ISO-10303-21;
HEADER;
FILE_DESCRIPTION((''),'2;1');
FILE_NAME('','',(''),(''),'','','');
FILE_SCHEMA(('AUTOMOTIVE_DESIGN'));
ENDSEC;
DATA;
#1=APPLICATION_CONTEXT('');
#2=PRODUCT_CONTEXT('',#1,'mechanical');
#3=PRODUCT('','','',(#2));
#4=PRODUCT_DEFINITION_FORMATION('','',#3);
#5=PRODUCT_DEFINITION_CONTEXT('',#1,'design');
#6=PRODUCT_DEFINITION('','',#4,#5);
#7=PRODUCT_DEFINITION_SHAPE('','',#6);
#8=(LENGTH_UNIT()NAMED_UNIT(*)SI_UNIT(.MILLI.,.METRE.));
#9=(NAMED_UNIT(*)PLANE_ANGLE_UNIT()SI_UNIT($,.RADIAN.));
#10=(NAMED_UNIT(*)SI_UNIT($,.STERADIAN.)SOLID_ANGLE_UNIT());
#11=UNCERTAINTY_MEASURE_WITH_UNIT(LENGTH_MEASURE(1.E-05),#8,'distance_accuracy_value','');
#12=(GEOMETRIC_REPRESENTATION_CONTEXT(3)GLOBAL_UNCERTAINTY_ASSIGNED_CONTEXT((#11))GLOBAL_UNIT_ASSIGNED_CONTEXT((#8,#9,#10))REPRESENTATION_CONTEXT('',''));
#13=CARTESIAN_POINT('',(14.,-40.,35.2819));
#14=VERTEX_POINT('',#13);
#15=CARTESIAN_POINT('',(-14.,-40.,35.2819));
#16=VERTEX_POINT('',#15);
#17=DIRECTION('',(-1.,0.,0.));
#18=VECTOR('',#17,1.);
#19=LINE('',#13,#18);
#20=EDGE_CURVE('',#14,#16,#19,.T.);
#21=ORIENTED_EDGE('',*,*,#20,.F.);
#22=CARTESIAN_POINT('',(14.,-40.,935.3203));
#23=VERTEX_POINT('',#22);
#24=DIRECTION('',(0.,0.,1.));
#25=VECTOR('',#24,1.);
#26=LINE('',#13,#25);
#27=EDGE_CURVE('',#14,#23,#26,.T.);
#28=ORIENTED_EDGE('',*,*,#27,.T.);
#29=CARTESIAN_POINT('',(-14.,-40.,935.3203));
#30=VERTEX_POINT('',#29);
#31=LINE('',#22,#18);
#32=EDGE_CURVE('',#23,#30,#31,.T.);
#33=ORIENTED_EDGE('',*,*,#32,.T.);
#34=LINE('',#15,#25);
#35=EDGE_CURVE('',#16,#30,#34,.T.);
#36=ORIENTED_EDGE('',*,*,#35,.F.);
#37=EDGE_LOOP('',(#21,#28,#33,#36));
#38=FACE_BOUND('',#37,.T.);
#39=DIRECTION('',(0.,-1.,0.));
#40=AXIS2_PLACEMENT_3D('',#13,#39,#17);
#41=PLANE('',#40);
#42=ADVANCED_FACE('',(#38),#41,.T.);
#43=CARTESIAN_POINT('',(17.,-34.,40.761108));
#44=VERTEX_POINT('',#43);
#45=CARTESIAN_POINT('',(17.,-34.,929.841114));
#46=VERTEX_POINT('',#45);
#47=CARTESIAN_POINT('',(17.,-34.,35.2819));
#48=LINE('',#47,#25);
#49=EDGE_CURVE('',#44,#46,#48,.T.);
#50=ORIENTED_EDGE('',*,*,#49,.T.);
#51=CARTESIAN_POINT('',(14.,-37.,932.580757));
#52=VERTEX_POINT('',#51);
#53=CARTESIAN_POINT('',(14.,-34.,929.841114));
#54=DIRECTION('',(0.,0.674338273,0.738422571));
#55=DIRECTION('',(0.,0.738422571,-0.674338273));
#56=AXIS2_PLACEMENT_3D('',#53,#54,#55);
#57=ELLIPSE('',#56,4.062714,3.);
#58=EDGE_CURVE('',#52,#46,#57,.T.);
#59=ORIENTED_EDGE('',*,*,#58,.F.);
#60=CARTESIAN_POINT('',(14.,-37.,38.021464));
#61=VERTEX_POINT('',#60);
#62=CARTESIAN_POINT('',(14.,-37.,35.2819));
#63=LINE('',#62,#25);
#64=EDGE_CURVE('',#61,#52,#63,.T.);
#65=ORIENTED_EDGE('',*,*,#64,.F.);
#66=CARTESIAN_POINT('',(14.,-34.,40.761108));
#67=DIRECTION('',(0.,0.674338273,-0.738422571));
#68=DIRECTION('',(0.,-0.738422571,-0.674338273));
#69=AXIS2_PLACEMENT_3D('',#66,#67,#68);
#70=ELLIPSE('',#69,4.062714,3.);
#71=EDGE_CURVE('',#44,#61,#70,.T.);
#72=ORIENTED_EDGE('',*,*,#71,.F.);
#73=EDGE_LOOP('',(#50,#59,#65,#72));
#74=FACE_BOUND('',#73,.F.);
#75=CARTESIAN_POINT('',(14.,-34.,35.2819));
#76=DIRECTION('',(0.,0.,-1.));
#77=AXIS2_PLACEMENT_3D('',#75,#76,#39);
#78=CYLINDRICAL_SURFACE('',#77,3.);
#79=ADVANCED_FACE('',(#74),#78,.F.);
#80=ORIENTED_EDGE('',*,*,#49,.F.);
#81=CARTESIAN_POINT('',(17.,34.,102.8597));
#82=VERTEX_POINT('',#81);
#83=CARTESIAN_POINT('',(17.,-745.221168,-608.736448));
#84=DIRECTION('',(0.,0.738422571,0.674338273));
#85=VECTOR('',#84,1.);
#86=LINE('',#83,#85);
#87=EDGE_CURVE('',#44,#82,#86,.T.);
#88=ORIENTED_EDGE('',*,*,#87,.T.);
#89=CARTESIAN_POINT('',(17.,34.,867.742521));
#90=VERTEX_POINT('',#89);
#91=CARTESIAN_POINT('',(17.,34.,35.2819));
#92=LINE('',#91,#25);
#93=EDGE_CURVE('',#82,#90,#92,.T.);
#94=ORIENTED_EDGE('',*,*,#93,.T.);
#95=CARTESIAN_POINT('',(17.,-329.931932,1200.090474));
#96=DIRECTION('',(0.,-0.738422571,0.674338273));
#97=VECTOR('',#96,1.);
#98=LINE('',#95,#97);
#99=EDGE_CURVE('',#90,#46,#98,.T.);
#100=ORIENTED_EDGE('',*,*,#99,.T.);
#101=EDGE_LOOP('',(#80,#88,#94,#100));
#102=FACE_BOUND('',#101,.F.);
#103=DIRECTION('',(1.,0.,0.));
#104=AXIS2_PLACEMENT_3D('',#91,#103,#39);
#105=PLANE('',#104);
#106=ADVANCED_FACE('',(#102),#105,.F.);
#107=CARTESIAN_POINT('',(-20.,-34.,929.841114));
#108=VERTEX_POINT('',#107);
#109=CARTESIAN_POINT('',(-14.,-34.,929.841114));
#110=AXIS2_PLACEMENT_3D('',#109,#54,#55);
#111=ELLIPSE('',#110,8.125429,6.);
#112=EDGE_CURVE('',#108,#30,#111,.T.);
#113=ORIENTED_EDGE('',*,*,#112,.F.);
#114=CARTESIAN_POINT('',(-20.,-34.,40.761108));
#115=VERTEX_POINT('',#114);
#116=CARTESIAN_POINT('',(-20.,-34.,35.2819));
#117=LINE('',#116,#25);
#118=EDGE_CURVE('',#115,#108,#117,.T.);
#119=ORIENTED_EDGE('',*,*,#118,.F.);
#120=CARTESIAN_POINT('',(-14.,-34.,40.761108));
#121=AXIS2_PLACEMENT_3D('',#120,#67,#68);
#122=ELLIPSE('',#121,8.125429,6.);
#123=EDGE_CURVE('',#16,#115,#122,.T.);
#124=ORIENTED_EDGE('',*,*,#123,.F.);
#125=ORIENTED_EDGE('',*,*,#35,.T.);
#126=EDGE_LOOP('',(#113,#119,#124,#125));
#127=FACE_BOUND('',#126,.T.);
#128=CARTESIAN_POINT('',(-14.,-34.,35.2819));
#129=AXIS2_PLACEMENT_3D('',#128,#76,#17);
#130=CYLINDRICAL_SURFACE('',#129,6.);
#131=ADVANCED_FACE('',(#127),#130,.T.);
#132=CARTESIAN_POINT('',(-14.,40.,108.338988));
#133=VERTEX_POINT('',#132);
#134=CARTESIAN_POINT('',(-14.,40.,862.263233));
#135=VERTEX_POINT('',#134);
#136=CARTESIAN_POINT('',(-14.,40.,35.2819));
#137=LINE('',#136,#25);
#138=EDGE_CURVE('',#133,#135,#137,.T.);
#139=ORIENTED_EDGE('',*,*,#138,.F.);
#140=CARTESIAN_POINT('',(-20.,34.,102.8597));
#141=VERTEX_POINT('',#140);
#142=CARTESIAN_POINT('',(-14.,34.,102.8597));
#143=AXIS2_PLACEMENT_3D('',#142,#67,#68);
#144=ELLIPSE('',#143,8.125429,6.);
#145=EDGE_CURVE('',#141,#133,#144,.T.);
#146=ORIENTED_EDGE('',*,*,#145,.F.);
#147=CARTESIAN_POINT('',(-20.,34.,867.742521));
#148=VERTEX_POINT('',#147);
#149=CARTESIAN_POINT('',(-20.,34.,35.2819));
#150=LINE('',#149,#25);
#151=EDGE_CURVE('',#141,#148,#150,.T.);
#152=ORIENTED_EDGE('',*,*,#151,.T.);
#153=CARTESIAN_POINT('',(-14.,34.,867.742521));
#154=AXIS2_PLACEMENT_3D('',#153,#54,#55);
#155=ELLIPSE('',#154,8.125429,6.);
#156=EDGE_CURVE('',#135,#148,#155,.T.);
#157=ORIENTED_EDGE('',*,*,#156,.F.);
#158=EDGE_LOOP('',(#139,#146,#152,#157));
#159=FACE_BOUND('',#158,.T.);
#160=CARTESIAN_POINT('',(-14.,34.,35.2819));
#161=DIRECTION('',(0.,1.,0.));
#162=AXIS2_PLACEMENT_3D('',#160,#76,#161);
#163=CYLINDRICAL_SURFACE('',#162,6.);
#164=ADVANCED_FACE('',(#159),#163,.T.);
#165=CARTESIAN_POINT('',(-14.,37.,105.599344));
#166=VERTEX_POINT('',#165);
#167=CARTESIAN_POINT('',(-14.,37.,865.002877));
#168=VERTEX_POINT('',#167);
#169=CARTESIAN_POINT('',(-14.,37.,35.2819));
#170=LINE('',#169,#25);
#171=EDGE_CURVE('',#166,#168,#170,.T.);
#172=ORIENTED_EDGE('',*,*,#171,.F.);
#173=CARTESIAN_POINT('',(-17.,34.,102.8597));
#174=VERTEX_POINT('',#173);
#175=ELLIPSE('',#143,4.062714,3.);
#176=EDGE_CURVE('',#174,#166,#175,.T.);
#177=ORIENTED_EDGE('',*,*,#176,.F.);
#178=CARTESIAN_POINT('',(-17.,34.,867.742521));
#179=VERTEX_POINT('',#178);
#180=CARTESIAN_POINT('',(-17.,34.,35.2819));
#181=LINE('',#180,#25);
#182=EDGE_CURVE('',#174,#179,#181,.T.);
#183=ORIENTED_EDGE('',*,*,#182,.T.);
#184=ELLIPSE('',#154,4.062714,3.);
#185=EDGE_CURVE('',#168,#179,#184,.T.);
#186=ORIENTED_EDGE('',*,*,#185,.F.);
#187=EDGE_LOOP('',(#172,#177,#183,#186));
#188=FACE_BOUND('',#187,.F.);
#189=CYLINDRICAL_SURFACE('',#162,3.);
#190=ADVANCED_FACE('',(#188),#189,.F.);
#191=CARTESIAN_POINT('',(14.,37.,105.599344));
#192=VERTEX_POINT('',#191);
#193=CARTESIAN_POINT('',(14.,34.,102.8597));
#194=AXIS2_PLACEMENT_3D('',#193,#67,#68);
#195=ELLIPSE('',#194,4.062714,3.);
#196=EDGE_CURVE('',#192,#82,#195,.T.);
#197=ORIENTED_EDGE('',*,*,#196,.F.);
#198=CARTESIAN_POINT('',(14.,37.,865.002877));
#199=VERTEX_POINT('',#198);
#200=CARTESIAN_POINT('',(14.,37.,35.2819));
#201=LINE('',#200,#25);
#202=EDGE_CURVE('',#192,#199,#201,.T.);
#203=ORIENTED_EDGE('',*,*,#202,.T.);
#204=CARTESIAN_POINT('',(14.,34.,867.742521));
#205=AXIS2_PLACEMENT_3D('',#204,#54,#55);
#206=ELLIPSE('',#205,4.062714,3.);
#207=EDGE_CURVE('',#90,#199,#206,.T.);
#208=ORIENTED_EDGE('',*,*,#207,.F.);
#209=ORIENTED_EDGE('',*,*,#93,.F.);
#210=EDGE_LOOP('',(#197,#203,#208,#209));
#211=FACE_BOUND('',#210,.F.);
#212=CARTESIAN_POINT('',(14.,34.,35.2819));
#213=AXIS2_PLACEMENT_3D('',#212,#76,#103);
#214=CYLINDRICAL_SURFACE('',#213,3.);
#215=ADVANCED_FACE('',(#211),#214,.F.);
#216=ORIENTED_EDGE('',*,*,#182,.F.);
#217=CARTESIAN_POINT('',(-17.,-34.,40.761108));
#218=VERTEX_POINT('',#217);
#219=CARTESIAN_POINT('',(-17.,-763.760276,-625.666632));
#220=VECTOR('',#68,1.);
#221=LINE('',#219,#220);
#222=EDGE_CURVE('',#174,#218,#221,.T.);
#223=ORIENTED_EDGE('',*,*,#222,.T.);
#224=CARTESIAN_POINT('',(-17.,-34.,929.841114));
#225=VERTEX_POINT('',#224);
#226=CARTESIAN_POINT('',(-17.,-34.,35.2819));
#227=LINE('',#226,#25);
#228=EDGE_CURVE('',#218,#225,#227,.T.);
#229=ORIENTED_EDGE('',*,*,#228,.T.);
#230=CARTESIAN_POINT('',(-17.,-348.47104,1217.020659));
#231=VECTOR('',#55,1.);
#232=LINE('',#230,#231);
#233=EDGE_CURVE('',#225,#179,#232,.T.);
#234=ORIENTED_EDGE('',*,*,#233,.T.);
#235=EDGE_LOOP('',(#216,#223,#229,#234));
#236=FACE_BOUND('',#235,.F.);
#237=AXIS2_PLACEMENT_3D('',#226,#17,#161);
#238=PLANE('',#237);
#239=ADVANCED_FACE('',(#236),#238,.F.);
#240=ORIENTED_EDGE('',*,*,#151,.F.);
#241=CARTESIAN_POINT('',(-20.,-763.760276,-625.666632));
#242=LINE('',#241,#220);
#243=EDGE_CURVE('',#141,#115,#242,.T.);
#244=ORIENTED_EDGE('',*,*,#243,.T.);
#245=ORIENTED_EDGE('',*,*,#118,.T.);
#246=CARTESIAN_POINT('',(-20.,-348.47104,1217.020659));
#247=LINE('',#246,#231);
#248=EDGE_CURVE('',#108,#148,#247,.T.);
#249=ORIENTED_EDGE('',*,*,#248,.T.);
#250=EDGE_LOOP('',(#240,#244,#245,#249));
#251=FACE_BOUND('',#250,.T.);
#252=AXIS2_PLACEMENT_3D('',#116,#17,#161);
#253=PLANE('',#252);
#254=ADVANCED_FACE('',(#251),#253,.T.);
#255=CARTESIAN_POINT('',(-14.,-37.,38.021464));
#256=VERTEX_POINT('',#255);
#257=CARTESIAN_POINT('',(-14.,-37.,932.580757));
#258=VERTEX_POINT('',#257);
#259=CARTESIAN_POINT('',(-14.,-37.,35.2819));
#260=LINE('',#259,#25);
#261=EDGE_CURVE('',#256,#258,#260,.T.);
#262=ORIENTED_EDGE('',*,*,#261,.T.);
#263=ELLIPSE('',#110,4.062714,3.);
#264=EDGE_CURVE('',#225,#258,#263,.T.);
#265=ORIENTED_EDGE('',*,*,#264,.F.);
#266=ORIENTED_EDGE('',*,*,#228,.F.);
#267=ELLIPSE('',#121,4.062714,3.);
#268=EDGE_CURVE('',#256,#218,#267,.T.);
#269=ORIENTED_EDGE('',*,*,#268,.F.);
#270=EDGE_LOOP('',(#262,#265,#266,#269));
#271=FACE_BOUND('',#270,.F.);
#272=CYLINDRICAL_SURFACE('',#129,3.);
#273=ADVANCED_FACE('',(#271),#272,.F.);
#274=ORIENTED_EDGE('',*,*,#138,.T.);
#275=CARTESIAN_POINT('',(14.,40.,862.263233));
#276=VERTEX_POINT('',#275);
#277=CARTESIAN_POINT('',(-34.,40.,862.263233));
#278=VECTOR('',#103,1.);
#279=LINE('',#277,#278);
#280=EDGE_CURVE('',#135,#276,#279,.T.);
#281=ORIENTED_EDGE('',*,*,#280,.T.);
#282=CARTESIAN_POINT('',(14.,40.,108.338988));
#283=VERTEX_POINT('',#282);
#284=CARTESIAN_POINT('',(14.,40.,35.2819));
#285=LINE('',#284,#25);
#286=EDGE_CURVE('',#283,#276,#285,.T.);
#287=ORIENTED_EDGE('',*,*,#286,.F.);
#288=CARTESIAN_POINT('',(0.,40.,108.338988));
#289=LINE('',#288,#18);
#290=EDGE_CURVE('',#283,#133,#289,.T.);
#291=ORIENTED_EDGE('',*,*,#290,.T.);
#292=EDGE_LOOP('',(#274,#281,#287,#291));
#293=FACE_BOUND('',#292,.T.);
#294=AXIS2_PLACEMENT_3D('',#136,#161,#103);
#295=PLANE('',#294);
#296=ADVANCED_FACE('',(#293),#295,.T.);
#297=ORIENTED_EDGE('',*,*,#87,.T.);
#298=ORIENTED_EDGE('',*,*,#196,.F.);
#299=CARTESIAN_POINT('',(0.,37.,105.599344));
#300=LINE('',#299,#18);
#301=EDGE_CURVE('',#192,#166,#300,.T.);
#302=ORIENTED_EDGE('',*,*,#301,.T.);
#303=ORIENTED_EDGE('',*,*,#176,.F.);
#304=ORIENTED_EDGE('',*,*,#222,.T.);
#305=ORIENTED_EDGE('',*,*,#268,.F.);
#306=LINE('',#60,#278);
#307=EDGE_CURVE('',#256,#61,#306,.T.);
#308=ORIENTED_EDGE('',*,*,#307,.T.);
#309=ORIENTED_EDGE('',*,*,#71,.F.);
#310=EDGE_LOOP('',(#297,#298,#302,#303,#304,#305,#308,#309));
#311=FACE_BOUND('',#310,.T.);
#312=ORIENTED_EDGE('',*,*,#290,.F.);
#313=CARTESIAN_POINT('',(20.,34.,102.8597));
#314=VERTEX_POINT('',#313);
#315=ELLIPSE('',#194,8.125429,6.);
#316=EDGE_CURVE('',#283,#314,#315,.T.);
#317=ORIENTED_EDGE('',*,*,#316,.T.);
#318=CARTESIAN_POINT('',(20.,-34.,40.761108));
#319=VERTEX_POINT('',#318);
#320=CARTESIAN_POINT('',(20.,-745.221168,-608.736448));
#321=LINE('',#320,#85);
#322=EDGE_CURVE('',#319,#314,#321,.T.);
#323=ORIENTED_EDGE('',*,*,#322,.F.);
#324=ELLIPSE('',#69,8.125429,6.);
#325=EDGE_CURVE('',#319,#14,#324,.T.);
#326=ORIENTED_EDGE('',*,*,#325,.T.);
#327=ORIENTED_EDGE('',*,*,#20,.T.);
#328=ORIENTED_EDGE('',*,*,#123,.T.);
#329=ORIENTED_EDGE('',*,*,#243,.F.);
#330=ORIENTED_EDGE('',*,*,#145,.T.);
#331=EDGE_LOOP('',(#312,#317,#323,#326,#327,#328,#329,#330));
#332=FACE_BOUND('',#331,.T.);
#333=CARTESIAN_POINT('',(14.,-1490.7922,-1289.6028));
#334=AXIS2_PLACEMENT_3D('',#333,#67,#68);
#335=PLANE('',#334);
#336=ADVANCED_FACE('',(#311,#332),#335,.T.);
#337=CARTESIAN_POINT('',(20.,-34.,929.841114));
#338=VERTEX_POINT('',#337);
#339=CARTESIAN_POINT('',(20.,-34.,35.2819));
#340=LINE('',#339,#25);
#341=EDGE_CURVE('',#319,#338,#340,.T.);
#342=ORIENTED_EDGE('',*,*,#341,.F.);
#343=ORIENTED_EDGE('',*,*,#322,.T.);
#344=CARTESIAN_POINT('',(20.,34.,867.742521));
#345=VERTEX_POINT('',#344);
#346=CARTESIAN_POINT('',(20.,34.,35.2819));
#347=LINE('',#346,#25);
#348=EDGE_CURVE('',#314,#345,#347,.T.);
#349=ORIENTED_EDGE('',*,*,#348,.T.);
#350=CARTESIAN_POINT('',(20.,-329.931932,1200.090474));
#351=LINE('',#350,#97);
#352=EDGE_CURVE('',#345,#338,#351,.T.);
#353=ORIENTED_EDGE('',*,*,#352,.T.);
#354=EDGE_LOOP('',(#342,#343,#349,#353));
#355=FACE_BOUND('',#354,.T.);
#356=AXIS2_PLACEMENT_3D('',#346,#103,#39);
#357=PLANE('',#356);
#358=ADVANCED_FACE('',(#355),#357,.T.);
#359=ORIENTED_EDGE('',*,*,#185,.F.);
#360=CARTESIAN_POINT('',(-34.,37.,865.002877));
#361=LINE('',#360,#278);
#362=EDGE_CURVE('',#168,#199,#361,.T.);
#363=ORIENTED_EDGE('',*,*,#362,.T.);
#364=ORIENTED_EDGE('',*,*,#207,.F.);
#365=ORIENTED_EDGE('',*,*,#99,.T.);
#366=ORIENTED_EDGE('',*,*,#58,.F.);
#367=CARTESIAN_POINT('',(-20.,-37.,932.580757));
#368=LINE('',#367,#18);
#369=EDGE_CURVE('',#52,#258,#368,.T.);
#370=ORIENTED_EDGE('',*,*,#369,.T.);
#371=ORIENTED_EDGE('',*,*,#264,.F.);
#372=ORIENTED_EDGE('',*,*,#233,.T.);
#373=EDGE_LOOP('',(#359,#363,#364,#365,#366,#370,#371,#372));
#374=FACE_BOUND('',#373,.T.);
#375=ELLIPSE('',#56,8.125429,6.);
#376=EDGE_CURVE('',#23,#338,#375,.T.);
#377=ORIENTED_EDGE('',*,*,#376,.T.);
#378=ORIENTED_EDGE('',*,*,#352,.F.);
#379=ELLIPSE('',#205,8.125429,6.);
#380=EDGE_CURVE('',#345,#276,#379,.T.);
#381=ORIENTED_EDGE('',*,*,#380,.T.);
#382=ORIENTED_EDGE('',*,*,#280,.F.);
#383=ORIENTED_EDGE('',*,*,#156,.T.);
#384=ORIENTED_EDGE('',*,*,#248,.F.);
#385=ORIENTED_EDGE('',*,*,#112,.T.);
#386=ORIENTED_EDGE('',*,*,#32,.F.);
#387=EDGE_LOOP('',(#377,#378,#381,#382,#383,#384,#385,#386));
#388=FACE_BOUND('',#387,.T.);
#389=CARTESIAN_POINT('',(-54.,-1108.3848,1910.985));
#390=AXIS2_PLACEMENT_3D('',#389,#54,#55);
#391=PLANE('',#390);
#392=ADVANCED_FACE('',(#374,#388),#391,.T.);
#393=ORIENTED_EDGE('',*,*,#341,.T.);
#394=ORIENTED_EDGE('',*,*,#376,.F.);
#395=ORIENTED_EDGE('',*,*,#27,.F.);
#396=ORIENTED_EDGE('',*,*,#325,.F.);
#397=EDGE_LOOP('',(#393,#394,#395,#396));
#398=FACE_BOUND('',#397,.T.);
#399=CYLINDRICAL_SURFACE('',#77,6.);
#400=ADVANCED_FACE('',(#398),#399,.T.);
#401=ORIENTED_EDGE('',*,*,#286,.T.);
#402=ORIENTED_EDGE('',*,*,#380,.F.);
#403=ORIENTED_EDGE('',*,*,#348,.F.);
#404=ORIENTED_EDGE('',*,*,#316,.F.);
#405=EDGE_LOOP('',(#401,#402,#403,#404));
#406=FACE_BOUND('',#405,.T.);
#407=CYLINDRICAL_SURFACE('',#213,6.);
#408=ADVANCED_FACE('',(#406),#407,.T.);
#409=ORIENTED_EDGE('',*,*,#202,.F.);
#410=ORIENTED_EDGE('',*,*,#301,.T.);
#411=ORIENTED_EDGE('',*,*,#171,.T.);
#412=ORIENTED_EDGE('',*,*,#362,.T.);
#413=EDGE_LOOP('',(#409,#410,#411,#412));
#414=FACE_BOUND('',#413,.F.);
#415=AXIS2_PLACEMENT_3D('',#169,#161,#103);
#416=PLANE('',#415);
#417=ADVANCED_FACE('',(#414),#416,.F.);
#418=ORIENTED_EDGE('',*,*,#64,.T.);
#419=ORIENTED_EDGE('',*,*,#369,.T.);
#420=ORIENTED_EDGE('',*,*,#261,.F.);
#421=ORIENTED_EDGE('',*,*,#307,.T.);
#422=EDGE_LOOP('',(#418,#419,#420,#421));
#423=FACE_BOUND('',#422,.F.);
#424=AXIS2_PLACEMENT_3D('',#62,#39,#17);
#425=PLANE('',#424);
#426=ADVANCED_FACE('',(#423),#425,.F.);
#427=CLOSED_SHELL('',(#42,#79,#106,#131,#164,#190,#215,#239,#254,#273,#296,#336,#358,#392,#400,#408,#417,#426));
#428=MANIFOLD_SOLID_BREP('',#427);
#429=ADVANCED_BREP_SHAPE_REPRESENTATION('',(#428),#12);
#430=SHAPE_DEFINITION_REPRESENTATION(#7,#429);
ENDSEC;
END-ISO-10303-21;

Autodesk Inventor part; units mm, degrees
ref_plane "Start Plane" through (0, 0, 35.2819) normal (0, 0, 1) x (1, 0, 0)
ref_plane "End Plane" through (0, 0, 935.3203) normal (0, 0, 1) x (1, 0, 0)
sketch "Sketch" plane through (0, 0, 0) normal (0, 0, 1) x (1, 0, 0)
  line L0 (-20, -34) -> (-20, 34)
  line L1 (-14, 40) -> (14, 40)
  line L2 (20, 34) -> (20, -34)
  line L3 (14, -40) -> (-14, -40)
  arc A0 (-20, -34) -> (-14, -40) centre (-14, -34) ccw
  arc A1 (20, 34) -> (14, 40) centre (14, 34) ccw
  arc A2 (-14, 40) -> (-20, 34) centre (-14, 34) ccw
  arc A3 (14, -40) -> (20, -34) centre (14, -34) ccw
  arc A4 (-14, 37) -> (-17, 34) centre (-14, 34) ccw
  line L4 (-14, 37) -> (14, 37)
  arc A5 (17, 34) -> (14, 37) centre (14, 34) ccw
  line L5 (17, 34) -> (17, -34)
  arc A6 (14, -37) -> (17, -34) centre (14, -34) ccw
  line L6 (14, -37) -> (-14, -37)
  arc A7 (-17, -34) -> (-14, -37) centre (-14, -34) ccw
  line L7 (-17, -34) -> (-17, 34)
  line L8 (0, 57.7397) -> (0, -57.7397) construction
  line L9 (-29.7397, 0) -> (29.7397, 0) construction
  dimension "d7" = 6
  dimension "d9" = 40
  dimension "d11" = 80
  dimension "d12" = 3
  dimension "d15" = 20
  dimension "d16" = 40
extrude "Body" add sketch "Sketch" along normal up to surface (900.0384 mm away) from surface at 35.2819
sketch "Sketch3" plane through (0, 0, 0) normal (0, 0, 1) x (1, 0, 0)
  line L0 (0, 0) -> (10, 0)
ref_plane "Work Plane3" through (0, 0, 0) normal (0, -1, 0) x (1, 0, 0)
ref_plane "Work Plane4" through (-54, -1108.3848, 1910.985) normal (0, 0.6743383, 0.7384226) x (1, 0, 0)
split "Split1" plane through (-54, -1108.3848, 1910.985) removes the side toward (0, 0.6743383, 0.7384226)
ref_plane "Work Plane5" through (14, -1490.7922, -1289.6028) normal (0, 0.6743383, -0.7384226) x (1, 0, 0)
split "Split2" plane through (14, -1490.7922, -1289.6028) removes the side toward (0, 0.6743383, -0.7384226)
sketch "Sketch4" plane through (0, 0, 0) normal (0, -1, 0) x (1, 0, 0)
  line L0 (-2, 35.2819) -> (12, 35.2819) projected
  line L1 (-2, 935.3203) -> (12, 935.3203) projected
  dimension "d18" = 900.0385
equation "\"d7\" = G_IR"
equation "\"d9\" = G_W"
equation "\"d11\" = G_H"
equation "\"d12\" = G_T"
equation "\"d15\" = 0.5 * d9"
equation "\"d16\" = 0.5 * d11"
equation "\"d3\" = G_L"
equation "\"G_W\" = 40"
equation "\"G_H\" = 80"
equation "\"G_T\" = 3"
equation "\"G_IR\" = 6"
equation "\"G_L\" = d18"
equation "\"G_OFFSET_START\" = -35.28188"
equation "\"G_OFFSET_END\" = -143.62093"
equation "\"d13\" = -G_OFFSET_START"
equation "\"d14\" = G_OFFSET_END + B_L"
equation "\"B_L\" = 1078.94126"
properties part number "ISO 10799-2 - 80x40x3 - 900,04" material "Steel, Mild"
